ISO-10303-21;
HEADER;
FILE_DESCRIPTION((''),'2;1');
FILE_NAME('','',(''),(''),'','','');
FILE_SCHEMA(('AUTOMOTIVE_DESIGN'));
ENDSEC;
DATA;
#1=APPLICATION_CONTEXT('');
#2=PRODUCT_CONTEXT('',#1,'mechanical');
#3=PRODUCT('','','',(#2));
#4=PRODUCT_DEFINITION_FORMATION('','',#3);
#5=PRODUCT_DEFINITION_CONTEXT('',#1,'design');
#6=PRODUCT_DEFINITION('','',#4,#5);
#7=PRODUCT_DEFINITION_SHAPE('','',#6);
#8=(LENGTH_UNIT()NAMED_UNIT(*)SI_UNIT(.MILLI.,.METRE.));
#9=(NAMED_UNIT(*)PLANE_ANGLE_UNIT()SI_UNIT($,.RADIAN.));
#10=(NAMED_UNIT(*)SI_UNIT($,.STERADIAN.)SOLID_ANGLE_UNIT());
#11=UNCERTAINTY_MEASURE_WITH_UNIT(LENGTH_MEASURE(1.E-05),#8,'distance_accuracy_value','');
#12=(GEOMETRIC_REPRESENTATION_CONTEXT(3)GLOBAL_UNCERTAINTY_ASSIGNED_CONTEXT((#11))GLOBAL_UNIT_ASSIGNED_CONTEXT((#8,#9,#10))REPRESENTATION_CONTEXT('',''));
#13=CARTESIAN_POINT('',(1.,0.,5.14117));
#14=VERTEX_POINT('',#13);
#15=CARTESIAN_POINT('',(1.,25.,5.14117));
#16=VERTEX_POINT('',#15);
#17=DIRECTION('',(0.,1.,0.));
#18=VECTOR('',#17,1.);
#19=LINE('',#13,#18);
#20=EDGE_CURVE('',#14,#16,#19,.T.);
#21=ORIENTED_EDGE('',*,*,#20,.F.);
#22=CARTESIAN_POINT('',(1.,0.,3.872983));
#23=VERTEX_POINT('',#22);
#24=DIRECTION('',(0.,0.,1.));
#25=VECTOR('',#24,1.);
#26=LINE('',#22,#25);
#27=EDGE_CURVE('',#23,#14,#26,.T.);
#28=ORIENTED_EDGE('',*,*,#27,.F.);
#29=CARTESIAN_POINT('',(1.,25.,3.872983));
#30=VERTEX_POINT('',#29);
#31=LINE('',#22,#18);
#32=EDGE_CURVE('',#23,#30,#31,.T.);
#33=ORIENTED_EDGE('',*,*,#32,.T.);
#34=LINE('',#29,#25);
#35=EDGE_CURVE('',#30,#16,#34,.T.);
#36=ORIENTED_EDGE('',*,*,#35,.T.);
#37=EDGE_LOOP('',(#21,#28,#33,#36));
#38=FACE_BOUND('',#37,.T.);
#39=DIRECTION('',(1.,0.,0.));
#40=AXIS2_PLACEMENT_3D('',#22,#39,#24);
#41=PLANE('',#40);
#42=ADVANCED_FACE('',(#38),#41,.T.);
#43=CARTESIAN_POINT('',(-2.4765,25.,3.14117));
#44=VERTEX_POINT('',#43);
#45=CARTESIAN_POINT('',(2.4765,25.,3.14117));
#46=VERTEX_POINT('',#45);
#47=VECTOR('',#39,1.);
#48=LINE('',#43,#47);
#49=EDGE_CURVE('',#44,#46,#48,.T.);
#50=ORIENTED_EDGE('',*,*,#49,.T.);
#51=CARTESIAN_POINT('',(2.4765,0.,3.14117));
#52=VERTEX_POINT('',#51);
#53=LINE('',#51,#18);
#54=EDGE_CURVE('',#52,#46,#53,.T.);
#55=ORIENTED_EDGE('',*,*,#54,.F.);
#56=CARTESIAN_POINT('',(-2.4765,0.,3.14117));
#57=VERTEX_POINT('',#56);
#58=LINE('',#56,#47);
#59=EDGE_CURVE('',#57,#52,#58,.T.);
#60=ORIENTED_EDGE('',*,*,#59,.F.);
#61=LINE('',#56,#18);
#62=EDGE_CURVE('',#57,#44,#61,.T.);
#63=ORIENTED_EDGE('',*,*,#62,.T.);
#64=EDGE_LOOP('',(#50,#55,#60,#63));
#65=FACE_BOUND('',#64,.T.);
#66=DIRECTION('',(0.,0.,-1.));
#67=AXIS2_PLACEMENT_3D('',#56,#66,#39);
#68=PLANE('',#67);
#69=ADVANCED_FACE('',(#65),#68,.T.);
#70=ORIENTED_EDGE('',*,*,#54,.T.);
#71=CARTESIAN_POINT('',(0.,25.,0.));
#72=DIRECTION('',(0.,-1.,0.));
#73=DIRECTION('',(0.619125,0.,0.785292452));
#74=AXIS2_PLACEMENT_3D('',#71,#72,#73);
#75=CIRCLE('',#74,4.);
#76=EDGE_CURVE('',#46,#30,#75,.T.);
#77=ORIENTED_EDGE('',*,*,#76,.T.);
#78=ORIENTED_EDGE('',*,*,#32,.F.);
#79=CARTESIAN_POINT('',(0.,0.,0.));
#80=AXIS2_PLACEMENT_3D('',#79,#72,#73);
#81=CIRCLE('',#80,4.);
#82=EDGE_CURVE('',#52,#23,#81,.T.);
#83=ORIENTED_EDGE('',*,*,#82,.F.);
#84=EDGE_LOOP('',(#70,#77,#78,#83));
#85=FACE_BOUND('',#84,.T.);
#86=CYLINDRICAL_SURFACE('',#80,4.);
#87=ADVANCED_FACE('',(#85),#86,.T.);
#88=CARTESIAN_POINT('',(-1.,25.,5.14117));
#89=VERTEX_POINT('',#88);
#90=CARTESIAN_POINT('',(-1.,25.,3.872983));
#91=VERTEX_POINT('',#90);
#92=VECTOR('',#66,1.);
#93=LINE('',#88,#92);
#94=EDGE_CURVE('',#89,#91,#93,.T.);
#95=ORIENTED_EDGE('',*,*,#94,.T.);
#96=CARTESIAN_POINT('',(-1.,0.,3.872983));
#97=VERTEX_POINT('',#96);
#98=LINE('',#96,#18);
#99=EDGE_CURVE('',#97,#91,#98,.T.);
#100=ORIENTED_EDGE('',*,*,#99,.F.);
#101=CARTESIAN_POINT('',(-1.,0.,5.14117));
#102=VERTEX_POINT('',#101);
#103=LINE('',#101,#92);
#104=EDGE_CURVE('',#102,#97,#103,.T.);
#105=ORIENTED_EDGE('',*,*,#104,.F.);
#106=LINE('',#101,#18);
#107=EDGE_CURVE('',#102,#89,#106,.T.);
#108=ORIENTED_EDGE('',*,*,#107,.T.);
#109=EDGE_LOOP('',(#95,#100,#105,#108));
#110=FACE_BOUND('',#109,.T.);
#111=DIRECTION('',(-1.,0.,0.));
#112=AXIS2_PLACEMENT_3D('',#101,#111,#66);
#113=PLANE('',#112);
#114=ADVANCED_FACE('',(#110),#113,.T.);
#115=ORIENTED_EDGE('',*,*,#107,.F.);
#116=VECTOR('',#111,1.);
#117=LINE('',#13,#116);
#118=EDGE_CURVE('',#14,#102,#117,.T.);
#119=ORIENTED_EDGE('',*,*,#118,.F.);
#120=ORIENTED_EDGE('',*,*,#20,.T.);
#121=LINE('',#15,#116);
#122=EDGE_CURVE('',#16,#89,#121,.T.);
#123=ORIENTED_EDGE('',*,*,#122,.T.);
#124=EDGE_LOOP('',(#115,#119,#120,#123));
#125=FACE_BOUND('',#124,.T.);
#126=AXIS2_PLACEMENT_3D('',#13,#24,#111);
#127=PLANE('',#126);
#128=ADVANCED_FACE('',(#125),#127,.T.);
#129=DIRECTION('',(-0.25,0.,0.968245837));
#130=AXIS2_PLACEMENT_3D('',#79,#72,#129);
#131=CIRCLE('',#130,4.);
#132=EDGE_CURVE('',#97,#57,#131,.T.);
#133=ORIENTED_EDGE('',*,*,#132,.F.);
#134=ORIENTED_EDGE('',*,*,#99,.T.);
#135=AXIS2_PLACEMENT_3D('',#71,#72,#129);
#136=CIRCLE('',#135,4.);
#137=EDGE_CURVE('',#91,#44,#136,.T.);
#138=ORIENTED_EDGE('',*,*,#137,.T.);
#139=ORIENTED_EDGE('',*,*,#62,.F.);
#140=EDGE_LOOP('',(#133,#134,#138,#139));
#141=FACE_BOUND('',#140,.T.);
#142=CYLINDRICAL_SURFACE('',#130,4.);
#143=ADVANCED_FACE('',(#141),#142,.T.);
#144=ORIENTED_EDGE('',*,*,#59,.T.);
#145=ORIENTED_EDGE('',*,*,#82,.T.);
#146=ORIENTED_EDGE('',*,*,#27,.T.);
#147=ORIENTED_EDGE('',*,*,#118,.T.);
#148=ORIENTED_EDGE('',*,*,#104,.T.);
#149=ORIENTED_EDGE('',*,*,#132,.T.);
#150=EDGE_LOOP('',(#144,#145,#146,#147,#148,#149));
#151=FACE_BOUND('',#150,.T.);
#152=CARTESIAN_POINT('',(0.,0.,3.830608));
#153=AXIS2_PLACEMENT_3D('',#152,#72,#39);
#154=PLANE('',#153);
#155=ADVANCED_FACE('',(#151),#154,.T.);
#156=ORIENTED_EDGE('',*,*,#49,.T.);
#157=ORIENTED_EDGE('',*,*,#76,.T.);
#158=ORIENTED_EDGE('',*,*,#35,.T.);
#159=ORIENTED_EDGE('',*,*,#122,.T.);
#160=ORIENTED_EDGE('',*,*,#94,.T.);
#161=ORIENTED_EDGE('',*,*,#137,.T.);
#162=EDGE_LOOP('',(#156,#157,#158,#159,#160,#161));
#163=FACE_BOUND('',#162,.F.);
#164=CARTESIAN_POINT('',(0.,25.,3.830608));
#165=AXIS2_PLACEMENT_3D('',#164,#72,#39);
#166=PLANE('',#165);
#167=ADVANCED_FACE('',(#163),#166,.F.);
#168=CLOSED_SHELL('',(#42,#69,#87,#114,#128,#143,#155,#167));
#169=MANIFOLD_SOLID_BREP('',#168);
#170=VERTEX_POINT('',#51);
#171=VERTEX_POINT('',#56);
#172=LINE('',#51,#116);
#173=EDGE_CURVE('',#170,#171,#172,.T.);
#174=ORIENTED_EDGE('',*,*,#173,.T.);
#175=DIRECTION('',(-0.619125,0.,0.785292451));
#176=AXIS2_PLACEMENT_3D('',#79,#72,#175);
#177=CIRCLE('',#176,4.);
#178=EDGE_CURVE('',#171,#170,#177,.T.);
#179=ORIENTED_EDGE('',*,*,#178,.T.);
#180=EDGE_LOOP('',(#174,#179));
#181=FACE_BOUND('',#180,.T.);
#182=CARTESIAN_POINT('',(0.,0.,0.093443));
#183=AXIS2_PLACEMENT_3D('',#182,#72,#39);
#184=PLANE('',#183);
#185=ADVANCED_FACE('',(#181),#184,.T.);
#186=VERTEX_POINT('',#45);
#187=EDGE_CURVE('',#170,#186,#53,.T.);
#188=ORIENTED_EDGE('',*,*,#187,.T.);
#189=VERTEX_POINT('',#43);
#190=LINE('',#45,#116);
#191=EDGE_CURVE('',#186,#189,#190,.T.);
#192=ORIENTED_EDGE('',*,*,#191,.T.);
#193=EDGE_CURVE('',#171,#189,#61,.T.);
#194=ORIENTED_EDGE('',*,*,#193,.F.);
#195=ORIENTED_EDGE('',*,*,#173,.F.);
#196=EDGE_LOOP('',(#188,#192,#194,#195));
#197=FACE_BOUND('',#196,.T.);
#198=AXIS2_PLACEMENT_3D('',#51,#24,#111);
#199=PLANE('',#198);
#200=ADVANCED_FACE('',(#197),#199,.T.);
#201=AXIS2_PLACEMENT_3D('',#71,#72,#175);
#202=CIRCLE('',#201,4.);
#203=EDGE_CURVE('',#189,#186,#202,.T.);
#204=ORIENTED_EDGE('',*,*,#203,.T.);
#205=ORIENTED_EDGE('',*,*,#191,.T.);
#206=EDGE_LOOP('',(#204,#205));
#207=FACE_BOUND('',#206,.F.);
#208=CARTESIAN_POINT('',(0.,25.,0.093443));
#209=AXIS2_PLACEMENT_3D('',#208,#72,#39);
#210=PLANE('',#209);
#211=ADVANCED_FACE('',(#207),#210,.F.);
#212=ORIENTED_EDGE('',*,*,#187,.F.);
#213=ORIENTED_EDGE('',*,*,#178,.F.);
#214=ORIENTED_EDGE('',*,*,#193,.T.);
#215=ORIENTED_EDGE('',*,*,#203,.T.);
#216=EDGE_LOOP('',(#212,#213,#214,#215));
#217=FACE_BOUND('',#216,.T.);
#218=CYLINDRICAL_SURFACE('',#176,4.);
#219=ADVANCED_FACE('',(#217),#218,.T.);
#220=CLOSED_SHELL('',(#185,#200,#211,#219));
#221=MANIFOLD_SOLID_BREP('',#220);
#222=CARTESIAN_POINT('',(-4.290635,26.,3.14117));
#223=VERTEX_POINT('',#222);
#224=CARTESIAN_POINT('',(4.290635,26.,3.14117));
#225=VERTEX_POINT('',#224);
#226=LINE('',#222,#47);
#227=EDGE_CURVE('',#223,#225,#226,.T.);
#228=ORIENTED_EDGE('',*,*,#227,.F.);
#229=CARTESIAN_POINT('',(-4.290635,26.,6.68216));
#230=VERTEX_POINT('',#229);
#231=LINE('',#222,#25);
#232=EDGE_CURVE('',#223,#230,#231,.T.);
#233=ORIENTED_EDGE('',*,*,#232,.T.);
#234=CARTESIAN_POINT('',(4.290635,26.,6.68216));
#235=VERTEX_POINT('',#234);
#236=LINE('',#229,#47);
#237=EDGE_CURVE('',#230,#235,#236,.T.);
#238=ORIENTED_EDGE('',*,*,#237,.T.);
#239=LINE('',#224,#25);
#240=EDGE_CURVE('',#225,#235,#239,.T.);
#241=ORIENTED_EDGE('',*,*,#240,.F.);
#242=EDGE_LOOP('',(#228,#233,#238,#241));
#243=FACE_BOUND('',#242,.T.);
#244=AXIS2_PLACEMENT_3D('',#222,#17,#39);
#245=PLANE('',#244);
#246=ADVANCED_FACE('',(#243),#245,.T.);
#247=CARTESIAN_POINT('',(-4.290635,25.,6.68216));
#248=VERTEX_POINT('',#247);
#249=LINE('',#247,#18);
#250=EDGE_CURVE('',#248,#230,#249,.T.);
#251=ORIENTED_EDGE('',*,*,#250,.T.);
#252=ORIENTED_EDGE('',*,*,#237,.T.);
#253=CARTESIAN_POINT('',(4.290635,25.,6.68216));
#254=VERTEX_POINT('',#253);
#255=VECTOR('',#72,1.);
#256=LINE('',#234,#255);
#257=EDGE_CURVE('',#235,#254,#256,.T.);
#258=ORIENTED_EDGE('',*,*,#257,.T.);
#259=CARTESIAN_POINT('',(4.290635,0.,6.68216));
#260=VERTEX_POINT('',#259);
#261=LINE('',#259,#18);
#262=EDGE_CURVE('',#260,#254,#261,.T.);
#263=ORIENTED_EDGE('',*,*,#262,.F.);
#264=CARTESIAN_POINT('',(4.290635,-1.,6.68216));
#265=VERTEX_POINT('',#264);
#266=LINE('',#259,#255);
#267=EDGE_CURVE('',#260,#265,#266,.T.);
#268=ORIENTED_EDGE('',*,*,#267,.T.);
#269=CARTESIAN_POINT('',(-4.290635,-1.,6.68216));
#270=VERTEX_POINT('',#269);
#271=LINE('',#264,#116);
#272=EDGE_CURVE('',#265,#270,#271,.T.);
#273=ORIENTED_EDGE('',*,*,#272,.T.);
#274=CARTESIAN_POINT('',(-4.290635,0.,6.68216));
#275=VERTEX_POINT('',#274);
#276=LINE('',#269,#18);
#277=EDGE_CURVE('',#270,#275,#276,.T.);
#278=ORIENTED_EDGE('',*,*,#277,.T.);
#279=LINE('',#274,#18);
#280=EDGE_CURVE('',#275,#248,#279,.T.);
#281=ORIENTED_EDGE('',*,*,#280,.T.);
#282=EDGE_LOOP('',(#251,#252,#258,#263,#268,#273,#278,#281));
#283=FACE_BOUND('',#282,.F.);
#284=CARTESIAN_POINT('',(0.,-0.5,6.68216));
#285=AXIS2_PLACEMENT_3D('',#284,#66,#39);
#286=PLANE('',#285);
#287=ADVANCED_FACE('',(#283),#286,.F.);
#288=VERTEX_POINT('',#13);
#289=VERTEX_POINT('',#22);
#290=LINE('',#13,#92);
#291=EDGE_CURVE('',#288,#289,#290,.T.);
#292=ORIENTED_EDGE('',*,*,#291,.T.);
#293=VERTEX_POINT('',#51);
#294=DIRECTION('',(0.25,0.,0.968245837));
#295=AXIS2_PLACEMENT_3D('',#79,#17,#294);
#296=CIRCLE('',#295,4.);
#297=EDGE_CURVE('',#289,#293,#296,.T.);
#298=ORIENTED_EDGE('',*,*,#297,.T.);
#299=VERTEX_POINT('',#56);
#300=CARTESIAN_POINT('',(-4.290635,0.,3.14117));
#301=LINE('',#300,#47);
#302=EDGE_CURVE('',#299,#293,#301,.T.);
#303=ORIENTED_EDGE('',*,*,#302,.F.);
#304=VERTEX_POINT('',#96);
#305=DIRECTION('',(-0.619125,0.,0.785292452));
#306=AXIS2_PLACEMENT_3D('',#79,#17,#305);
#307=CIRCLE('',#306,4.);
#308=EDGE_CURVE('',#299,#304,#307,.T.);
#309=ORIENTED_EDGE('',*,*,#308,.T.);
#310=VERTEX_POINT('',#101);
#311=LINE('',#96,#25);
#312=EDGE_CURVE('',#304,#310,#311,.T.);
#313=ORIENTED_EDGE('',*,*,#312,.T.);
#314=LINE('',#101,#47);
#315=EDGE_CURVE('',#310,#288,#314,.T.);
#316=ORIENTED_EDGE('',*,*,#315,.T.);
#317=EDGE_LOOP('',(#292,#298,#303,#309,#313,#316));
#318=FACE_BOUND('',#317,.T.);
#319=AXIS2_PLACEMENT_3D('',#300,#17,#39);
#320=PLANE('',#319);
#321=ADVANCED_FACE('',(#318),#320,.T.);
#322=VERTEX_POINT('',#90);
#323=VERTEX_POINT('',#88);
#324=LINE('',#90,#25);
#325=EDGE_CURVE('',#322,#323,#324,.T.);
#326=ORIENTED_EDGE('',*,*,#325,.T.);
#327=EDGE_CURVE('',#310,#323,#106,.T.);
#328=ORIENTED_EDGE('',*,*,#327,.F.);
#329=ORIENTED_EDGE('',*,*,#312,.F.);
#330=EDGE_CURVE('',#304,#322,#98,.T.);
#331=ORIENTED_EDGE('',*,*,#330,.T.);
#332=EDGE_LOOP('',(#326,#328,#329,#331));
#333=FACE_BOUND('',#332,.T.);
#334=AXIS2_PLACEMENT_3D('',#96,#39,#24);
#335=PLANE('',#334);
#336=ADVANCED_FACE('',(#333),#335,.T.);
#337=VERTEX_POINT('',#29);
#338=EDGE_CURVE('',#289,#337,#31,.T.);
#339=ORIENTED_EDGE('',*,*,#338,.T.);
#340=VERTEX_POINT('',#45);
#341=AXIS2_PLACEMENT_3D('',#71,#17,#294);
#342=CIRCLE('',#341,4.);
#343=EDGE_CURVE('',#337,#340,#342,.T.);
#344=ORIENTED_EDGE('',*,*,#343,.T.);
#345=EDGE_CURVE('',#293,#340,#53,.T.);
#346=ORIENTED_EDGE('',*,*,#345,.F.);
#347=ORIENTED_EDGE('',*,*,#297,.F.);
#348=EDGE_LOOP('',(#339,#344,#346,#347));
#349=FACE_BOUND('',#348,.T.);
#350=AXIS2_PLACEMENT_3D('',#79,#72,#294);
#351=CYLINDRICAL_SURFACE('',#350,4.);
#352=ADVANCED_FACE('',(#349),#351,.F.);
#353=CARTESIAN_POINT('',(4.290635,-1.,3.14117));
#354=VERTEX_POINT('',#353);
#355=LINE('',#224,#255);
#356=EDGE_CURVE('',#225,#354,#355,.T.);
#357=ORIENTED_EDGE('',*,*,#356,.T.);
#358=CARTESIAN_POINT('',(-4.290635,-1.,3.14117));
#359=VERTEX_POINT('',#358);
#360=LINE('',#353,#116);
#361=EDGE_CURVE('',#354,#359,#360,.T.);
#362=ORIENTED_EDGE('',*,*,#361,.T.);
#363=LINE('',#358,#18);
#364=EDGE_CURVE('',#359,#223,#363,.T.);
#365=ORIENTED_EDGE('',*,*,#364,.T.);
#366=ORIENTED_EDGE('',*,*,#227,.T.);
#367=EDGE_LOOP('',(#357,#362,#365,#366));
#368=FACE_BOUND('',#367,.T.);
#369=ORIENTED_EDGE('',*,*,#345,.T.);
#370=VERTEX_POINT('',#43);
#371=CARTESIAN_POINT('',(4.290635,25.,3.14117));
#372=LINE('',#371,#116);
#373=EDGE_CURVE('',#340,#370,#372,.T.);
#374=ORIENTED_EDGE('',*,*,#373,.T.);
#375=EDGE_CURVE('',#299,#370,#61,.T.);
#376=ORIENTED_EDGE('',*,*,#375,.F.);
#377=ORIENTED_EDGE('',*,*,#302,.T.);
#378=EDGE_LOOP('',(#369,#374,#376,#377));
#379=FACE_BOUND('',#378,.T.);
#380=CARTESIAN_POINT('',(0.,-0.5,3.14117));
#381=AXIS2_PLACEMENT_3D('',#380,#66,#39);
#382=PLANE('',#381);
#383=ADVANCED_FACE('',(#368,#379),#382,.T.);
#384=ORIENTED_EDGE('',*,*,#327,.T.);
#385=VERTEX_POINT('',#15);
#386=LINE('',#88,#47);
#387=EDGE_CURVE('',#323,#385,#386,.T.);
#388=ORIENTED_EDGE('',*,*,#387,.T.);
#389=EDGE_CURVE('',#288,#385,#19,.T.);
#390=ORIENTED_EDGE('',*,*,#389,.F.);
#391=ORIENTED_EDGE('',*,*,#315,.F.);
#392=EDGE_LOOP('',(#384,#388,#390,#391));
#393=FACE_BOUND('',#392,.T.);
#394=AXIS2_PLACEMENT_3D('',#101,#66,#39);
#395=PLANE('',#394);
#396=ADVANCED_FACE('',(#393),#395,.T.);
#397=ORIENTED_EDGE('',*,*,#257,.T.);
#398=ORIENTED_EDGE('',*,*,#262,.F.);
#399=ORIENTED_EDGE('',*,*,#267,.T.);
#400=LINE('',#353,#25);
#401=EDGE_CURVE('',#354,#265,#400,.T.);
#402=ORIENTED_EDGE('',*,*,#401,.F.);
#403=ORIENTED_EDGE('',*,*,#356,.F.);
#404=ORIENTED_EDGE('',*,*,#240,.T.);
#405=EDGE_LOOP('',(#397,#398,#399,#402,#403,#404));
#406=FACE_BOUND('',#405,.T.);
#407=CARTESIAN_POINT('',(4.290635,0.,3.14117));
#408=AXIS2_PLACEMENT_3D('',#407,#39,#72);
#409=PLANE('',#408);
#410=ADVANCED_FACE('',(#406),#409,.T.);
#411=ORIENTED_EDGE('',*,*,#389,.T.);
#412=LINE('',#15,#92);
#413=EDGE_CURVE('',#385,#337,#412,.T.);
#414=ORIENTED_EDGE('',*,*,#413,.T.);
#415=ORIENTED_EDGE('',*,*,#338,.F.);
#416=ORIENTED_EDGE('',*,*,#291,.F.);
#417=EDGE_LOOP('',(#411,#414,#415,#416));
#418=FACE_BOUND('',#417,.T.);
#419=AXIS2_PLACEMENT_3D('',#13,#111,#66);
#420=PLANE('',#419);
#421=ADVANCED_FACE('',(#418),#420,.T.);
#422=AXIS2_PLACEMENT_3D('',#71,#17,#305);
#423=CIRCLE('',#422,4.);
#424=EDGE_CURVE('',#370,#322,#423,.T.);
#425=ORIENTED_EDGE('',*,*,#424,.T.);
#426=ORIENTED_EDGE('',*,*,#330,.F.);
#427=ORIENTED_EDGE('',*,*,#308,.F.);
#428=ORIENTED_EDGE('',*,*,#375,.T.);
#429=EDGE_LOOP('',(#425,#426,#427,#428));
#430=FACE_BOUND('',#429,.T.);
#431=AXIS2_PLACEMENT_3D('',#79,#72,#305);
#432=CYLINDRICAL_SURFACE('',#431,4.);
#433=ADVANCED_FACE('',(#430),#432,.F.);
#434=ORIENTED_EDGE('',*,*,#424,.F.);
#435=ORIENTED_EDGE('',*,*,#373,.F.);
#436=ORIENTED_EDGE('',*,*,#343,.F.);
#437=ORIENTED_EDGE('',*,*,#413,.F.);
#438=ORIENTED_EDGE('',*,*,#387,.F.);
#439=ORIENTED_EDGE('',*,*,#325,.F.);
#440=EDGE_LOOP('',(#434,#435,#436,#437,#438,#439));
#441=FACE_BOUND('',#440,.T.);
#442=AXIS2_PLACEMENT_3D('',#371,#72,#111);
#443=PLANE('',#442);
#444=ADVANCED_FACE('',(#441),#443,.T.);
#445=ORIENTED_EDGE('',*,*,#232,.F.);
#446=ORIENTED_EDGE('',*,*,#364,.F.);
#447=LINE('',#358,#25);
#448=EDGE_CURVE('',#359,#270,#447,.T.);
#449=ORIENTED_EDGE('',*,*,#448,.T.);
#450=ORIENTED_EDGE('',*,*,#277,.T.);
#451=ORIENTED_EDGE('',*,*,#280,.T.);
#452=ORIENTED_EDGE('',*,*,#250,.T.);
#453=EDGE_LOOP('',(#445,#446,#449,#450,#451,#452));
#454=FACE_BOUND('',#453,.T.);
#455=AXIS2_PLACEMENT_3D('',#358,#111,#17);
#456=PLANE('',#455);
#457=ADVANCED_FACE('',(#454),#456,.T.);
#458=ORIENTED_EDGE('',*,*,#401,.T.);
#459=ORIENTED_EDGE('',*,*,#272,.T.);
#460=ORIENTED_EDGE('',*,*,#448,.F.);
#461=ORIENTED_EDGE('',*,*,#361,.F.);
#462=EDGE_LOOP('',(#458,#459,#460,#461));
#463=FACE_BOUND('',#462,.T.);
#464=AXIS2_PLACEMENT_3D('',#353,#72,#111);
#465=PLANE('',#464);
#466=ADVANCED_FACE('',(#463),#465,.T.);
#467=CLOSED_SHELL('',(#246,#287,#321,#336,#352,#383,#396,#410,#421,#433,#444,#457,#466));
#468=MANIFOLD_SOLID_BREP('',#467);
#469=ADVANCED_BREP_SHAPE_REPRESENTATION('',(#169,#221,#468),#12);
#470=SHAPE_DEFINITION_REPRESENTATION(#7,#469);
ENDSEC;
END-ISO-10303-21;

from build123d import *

# Parameters (mm, degrees)
F1_DEPTH = 25
F3_DEPTH = 25
F5_DEPTH = 25
F7_DEPTH = 3.5409905045


with BuildPart() as f1:
    # F0 (on Front) → F1 (new body)
    with BuildSketch(Plane.XZ):
        with BuildLine():
            Line((2.4765, 3.141169806), (-2.4765, 3.141169806))
            ThreePointArc((-2.4765, 3.141169806), (0, -4), (2.4765, 3.141169806))
        make_face()
    extrude(amount=-F1_DEPTH)


with BuildPart() as f3:
    # F2 (on face) → F3 (new body)
    with BuildSketch(Plane.XZ):
        with BuildLine():
            ThreePointArc((-1, 3.8729833462), (-1.7763447939, 3.583936268), (-2.4765, 3.141169806))
            Line((-2.4765, 3.141169806), (2.4765, 3.141169806))
            ThreePointArc((2.4765, 3.141169806), (1.7763447939, 3.583936268), (1, 3.8729833462))
            Line((1, 3.8729833462), (1, 5.141169806))
            Line((1, 5.141169806), (-1, 5.141169806))
            Line((-1, 5.141169806), (-1, 3.8729833462))
        make_face()
    extrude(amount=-F3_DEPTH)


with BuildPart() as f5:
    # F4 (on face) → F5 (new body)
    with BuildSketch(Plane.XZ):
        with BuildLine():
            Line((-1, 3.8729833462), (-1, 5.141169806))
            Line((-1, 5.141169806), (1, 5.141169806))
            Line((1, 5.141169806), (1, 3.8729833462))
            ThreePointArc((1, 3.8729833462), (1.7763447939, 3.583936268), (2.4765, 3.141169806))
            Line((2.4765, 3.141169806), (4.2906352319, 3.141169806))
            Line((4.2906352319, 3.141169806), (4.2906352319, 6.6821603104))
            Line((4.2906352319, 6.6821603104), (0, 6.6821603104))
            Line((0, 6.6821603104), (-4.2906352319, 6.6821603104))
            Line((-4.2906352319, 6.6821603104), (-4.2906352319, 3.141169806))
            Line((-4.2906352319, 3.141169806), (-2.4765, 3.141169806))
            ThreePointArc((-2.4765, 3.141169806), (-1.7763447939, 3.583936268), (-1, 3.8729833462))
        make_face()
    extrude(amount=-F5_DEPTH)

    # F6 (on face) → F7 (join, through all)
    with BuildSketch(Plane(origin=(0, 0, 3.141169806), x_dir=(1, 0, 0), z_dir=(0, 0, -1))):
        Polygon((-4.2906352319, 0), (-2.4765, 0), (2.4765, 0), (4.2906352319, 0), (4.2906352319, 1), (-4.2906352319, 1), align=None)
        Polygon((2.4765, -25), (-2.4765, -25), (-4.2906352319, -25), (-4.2906352319, -26), (4.2906352319, -26), (4.2906352319, -25), align=None)
    extrude(amount=-F7_DEPTH)


solid = Compound([f1.part, f3.part, f5.part])
